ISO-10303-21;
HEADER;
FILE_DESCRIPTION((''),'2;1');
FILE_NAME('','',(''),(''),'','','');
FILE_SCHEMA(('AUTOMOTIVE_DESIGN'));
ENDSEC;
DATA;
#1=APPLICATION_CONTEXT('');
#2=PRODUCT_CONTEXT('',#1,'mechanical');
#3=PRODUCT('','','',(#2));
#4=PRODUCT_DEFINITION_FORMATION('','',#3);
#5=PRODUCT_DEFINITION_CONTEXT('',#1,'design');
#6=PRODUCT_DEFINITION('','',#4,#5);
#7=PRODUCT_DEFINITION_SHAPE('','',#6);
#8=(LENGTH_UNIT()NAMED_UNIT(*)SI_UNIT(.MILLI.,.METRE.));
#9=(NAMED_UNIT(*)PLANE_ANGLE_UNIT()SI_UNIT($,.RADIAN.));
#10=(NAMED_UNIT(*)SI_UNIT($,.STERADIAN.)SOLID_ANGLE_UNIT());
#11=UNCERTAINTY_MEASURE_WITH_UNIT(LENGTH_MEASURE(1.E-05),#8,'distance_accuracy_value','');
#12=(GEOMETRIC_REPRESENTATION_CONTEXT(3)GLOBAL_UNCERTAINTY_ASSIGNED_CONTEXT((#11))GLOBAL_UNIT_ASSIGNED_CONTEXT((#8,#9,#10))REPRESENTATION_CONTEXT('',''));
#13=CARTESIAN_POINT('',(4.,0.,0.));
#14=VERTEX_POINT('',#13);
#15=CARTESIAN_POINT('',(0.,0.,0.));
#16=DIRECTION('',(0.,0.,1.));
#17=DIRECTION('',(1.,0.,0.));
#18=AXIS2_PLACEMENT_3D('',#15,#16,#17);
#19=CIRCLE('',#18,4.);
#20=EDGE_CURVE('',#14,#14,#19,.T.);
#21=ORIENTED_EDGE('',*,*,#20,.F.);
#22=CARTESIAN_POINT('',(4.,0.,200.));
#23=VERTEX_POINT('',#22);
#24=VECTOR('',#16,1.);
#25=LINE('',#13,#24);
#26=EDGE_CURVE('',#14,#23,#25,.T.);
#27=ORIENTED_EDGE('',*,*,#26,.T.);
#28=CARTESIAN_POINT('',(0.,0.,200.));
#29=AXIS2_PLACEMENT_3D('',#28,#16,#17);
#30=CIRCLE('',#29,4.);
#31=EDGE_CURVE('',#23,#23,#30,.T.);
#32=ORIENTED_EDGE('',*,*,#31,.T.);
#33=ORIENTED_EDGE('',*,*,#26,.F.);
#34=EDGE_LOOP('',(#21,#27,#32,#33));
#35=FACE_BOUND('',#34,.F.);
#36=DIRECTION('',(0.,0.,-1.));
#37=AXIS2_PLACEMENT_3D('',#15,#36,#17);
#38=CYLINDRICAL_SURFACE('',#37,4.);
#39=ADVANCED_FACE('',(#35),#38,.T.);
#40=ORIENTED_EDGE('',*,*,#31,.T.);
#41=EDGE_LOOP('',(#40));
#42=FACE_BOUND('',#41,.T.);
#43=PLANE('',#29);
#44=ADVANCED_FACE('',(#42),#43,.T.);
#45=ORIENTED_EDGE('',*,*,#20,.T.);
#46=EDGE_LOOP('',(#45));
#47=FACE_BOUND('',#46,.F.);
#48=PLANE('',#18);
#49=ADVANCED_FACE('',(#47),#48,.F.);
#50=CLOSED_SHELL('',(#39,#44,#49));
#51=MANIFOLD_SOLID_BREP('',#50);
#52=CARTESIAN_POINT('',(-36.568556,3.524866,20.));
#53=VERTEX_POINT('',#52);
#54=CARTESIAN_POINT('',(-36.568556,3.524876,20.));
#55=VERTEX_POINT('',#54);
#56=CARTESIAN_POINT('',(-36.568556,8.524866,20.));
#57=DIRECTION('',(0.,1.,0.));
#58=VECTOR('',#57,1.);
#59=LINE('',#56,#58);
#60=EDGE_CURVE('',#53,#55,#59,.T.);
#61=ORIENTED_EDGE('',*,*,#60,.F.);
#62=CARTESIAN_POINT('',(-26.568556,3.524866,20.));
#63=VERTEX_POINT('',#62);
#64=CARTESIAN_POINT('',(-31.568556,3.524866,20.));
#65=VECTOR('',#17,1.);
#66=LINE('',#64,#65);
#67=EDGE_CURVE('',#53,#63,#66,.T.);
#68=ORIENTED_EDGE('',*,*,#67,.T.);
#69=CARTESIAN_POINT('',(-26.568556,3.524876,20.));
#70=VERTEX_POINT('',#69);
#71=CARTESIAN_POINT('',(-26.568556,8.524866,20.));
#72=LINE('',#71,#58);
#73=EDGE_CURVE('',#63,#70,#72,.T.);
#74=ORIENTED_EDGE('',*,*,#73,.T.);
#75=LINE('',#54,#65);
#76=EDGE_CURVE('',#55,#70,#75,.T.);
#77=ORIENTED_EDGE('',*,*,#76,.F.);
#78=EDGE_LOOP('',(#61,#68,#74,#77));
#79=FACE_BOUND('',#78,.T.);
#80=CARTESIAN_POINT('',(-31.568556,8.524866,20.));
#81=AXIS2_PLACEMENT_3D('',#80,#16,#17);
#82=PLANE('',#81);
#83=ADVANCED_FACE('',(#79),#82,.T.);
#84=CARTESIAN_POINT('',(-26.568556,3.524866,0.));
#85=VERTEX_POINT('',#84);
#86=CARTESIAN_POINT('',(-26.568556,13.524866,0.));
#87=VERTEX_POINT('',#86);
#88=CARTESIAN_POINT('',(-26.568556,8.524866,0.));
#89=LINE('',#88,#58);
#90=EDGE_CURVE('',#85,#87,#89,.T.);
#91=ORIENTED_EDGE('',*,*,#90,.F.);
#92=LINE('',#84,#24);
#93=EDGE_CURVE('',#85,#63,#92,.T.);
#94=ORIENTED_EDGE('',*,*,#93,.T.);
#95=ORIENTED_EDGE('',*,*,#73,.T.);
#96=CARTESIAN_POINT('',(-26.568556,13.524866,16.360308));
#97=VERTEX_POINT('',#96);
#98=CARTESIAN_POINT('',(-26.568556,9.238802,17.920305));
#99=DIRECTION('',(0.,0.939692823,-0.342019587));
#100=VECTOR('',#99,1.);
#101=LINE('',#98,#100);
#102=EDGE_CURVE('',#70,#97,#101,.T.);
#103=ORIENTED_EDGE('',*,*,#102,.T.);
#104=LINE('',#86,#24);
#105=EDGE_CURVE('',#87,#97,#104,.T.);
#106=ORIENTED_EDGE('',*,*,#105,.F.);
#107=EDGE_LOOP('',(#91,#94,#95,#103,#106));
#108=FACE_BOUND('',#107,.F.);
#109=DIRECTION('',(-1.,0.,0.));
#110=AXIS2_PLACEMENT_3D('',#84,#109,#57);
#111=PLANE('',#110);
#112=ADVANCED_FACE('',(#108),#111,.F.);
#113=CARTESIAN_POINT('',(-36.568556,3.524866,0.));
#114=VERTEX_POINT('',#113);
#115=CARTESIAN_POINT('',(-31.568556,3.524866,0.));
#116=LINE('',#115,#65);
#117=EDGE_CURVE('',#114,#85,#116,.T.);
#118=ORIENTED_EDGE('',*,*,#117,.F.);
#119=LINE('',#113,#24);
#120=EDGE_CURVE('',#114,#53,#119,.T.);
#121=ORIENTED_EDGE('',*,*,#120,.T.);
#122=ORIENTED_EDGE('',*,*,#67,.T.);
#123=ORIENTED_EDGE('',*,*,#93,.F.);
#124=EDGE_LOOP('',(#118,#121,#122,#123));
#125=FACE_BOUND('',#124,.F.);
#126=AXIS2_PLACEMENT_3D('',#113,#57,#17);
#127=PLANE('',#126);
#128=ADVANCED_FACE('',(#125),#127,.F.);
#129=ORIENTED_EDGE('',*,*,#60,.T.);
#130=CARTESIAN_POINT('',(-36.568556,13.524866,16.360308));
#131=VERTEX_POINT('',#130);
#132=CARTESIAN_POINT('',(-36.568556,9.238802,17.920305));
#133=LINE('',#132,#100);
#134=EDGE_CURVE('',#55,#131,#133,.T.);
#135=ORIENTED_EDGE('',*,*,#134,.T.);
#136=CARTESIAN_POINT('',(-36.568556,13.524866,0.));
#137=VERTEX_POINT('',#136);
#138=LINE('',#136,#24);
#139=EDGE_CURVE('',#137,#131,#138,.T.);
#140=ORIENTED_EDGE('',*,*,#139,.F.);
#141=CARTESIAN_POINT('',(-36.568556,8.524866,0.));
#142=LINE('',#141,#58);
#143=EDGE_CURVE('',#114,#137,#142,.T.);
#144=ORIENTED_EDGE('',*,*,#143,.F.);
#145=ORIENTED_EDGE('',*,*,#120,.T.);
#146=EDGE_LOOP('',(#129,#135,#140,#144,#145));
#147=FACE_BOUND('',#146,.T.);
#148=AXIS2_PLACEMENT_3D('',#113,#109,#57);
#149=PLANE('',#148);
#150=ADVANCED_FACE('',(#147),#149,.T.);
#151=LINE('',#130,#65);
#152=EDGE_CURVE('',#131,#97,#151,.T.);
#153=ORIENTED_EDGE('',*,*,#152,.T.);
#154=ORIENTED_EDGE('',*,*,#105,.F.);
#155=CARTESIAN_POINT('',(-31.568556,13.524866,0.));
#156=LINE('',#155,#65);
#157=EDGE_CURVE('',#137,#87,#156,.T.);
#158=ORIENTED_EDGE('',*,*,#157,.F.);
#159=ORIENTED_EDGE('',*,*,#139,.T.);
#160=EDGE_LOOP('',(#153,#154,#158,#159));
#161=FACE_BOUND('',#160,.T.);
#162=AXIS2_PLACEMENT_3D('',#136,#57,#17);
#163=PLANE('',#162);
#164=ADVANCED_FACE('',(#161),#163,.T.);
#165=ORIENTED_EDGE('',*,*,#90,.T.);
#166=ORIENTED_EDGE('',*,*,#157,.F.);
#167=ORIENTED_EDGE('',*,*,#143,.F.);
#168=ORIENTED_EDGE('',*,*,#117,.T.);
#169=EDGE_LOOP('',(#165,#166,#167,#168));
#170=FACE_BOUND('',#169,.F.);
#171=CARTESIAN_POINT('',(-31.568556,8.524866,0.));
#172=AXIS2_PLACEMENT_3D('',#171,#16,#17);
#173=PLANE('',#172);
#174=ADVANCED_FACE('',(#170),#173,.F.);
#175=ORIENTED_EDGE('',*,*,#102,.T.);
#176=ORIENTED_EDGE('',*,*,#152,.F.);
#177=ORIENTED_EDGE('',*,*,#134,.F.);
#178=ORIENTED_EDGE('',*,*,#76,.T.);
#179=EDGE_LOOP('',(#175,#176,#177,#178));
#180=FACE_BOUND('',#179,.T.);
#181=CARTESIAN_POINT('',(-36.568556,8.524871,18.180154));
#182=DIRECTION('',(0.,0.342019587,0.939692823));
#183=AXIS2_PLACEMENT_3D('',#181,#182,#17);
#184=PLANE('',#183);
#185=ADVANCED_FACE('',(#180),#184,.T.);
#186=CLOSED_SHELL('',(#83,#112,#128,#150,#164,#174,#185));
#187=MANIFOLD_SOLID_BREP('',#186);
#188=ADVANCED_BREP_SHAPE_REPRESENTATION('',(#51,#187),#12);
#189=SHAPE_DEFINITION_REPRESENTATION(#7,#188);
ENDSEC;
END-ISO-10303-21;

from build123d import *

# Parameters (mm, degrees)
F0_R     = 4
F1_DEPTH = 200
F2_W     = 10
F2_H     = 10
F3_DEPTH = 20
F4_SIZE2 = 3.639692
F4_SIZE  = 9.99999


# Not quite as in the source:
# - a fillet or chamfer is up to 0.001 mm smaller than in the source, because OpenCascade refuses the exact size


with BuildPart() as f1:
    # F0 (on Top) → F1 (new body)
    with BuildSketch(Plane.XY):
        Circle(F0_R)
    extrude(amount=F1_DEPTH)


with BuildPart() as f3:
    # F2 (on Top) → F3 (new body)
    with BuildSketch(Plane.XY):
        with Locations((-31.5685559809, 8.5248657316)):
            Rectangle(F2_W, F2_H)
    extrude(amount=F3_DEPTH)

    # F4 (size 10 and 3.6397023427 in the source; OpenCascade refuses exactly that, so slightly less here)
    f4_edges = [f3.edges().sort_by_distance(p)[0] for p in [
        (-31.568556, 13.524866, 20),
    ]]
    f4_side = f3.faces().sort_by_distance((-31.568556, 8.524866, 20))[0]
    chamfer(f4_edges, length=F4_SIZE, length2=F4_SIZE2, reference=f4_side)


solid = Compound([f1.part, f3.part])
